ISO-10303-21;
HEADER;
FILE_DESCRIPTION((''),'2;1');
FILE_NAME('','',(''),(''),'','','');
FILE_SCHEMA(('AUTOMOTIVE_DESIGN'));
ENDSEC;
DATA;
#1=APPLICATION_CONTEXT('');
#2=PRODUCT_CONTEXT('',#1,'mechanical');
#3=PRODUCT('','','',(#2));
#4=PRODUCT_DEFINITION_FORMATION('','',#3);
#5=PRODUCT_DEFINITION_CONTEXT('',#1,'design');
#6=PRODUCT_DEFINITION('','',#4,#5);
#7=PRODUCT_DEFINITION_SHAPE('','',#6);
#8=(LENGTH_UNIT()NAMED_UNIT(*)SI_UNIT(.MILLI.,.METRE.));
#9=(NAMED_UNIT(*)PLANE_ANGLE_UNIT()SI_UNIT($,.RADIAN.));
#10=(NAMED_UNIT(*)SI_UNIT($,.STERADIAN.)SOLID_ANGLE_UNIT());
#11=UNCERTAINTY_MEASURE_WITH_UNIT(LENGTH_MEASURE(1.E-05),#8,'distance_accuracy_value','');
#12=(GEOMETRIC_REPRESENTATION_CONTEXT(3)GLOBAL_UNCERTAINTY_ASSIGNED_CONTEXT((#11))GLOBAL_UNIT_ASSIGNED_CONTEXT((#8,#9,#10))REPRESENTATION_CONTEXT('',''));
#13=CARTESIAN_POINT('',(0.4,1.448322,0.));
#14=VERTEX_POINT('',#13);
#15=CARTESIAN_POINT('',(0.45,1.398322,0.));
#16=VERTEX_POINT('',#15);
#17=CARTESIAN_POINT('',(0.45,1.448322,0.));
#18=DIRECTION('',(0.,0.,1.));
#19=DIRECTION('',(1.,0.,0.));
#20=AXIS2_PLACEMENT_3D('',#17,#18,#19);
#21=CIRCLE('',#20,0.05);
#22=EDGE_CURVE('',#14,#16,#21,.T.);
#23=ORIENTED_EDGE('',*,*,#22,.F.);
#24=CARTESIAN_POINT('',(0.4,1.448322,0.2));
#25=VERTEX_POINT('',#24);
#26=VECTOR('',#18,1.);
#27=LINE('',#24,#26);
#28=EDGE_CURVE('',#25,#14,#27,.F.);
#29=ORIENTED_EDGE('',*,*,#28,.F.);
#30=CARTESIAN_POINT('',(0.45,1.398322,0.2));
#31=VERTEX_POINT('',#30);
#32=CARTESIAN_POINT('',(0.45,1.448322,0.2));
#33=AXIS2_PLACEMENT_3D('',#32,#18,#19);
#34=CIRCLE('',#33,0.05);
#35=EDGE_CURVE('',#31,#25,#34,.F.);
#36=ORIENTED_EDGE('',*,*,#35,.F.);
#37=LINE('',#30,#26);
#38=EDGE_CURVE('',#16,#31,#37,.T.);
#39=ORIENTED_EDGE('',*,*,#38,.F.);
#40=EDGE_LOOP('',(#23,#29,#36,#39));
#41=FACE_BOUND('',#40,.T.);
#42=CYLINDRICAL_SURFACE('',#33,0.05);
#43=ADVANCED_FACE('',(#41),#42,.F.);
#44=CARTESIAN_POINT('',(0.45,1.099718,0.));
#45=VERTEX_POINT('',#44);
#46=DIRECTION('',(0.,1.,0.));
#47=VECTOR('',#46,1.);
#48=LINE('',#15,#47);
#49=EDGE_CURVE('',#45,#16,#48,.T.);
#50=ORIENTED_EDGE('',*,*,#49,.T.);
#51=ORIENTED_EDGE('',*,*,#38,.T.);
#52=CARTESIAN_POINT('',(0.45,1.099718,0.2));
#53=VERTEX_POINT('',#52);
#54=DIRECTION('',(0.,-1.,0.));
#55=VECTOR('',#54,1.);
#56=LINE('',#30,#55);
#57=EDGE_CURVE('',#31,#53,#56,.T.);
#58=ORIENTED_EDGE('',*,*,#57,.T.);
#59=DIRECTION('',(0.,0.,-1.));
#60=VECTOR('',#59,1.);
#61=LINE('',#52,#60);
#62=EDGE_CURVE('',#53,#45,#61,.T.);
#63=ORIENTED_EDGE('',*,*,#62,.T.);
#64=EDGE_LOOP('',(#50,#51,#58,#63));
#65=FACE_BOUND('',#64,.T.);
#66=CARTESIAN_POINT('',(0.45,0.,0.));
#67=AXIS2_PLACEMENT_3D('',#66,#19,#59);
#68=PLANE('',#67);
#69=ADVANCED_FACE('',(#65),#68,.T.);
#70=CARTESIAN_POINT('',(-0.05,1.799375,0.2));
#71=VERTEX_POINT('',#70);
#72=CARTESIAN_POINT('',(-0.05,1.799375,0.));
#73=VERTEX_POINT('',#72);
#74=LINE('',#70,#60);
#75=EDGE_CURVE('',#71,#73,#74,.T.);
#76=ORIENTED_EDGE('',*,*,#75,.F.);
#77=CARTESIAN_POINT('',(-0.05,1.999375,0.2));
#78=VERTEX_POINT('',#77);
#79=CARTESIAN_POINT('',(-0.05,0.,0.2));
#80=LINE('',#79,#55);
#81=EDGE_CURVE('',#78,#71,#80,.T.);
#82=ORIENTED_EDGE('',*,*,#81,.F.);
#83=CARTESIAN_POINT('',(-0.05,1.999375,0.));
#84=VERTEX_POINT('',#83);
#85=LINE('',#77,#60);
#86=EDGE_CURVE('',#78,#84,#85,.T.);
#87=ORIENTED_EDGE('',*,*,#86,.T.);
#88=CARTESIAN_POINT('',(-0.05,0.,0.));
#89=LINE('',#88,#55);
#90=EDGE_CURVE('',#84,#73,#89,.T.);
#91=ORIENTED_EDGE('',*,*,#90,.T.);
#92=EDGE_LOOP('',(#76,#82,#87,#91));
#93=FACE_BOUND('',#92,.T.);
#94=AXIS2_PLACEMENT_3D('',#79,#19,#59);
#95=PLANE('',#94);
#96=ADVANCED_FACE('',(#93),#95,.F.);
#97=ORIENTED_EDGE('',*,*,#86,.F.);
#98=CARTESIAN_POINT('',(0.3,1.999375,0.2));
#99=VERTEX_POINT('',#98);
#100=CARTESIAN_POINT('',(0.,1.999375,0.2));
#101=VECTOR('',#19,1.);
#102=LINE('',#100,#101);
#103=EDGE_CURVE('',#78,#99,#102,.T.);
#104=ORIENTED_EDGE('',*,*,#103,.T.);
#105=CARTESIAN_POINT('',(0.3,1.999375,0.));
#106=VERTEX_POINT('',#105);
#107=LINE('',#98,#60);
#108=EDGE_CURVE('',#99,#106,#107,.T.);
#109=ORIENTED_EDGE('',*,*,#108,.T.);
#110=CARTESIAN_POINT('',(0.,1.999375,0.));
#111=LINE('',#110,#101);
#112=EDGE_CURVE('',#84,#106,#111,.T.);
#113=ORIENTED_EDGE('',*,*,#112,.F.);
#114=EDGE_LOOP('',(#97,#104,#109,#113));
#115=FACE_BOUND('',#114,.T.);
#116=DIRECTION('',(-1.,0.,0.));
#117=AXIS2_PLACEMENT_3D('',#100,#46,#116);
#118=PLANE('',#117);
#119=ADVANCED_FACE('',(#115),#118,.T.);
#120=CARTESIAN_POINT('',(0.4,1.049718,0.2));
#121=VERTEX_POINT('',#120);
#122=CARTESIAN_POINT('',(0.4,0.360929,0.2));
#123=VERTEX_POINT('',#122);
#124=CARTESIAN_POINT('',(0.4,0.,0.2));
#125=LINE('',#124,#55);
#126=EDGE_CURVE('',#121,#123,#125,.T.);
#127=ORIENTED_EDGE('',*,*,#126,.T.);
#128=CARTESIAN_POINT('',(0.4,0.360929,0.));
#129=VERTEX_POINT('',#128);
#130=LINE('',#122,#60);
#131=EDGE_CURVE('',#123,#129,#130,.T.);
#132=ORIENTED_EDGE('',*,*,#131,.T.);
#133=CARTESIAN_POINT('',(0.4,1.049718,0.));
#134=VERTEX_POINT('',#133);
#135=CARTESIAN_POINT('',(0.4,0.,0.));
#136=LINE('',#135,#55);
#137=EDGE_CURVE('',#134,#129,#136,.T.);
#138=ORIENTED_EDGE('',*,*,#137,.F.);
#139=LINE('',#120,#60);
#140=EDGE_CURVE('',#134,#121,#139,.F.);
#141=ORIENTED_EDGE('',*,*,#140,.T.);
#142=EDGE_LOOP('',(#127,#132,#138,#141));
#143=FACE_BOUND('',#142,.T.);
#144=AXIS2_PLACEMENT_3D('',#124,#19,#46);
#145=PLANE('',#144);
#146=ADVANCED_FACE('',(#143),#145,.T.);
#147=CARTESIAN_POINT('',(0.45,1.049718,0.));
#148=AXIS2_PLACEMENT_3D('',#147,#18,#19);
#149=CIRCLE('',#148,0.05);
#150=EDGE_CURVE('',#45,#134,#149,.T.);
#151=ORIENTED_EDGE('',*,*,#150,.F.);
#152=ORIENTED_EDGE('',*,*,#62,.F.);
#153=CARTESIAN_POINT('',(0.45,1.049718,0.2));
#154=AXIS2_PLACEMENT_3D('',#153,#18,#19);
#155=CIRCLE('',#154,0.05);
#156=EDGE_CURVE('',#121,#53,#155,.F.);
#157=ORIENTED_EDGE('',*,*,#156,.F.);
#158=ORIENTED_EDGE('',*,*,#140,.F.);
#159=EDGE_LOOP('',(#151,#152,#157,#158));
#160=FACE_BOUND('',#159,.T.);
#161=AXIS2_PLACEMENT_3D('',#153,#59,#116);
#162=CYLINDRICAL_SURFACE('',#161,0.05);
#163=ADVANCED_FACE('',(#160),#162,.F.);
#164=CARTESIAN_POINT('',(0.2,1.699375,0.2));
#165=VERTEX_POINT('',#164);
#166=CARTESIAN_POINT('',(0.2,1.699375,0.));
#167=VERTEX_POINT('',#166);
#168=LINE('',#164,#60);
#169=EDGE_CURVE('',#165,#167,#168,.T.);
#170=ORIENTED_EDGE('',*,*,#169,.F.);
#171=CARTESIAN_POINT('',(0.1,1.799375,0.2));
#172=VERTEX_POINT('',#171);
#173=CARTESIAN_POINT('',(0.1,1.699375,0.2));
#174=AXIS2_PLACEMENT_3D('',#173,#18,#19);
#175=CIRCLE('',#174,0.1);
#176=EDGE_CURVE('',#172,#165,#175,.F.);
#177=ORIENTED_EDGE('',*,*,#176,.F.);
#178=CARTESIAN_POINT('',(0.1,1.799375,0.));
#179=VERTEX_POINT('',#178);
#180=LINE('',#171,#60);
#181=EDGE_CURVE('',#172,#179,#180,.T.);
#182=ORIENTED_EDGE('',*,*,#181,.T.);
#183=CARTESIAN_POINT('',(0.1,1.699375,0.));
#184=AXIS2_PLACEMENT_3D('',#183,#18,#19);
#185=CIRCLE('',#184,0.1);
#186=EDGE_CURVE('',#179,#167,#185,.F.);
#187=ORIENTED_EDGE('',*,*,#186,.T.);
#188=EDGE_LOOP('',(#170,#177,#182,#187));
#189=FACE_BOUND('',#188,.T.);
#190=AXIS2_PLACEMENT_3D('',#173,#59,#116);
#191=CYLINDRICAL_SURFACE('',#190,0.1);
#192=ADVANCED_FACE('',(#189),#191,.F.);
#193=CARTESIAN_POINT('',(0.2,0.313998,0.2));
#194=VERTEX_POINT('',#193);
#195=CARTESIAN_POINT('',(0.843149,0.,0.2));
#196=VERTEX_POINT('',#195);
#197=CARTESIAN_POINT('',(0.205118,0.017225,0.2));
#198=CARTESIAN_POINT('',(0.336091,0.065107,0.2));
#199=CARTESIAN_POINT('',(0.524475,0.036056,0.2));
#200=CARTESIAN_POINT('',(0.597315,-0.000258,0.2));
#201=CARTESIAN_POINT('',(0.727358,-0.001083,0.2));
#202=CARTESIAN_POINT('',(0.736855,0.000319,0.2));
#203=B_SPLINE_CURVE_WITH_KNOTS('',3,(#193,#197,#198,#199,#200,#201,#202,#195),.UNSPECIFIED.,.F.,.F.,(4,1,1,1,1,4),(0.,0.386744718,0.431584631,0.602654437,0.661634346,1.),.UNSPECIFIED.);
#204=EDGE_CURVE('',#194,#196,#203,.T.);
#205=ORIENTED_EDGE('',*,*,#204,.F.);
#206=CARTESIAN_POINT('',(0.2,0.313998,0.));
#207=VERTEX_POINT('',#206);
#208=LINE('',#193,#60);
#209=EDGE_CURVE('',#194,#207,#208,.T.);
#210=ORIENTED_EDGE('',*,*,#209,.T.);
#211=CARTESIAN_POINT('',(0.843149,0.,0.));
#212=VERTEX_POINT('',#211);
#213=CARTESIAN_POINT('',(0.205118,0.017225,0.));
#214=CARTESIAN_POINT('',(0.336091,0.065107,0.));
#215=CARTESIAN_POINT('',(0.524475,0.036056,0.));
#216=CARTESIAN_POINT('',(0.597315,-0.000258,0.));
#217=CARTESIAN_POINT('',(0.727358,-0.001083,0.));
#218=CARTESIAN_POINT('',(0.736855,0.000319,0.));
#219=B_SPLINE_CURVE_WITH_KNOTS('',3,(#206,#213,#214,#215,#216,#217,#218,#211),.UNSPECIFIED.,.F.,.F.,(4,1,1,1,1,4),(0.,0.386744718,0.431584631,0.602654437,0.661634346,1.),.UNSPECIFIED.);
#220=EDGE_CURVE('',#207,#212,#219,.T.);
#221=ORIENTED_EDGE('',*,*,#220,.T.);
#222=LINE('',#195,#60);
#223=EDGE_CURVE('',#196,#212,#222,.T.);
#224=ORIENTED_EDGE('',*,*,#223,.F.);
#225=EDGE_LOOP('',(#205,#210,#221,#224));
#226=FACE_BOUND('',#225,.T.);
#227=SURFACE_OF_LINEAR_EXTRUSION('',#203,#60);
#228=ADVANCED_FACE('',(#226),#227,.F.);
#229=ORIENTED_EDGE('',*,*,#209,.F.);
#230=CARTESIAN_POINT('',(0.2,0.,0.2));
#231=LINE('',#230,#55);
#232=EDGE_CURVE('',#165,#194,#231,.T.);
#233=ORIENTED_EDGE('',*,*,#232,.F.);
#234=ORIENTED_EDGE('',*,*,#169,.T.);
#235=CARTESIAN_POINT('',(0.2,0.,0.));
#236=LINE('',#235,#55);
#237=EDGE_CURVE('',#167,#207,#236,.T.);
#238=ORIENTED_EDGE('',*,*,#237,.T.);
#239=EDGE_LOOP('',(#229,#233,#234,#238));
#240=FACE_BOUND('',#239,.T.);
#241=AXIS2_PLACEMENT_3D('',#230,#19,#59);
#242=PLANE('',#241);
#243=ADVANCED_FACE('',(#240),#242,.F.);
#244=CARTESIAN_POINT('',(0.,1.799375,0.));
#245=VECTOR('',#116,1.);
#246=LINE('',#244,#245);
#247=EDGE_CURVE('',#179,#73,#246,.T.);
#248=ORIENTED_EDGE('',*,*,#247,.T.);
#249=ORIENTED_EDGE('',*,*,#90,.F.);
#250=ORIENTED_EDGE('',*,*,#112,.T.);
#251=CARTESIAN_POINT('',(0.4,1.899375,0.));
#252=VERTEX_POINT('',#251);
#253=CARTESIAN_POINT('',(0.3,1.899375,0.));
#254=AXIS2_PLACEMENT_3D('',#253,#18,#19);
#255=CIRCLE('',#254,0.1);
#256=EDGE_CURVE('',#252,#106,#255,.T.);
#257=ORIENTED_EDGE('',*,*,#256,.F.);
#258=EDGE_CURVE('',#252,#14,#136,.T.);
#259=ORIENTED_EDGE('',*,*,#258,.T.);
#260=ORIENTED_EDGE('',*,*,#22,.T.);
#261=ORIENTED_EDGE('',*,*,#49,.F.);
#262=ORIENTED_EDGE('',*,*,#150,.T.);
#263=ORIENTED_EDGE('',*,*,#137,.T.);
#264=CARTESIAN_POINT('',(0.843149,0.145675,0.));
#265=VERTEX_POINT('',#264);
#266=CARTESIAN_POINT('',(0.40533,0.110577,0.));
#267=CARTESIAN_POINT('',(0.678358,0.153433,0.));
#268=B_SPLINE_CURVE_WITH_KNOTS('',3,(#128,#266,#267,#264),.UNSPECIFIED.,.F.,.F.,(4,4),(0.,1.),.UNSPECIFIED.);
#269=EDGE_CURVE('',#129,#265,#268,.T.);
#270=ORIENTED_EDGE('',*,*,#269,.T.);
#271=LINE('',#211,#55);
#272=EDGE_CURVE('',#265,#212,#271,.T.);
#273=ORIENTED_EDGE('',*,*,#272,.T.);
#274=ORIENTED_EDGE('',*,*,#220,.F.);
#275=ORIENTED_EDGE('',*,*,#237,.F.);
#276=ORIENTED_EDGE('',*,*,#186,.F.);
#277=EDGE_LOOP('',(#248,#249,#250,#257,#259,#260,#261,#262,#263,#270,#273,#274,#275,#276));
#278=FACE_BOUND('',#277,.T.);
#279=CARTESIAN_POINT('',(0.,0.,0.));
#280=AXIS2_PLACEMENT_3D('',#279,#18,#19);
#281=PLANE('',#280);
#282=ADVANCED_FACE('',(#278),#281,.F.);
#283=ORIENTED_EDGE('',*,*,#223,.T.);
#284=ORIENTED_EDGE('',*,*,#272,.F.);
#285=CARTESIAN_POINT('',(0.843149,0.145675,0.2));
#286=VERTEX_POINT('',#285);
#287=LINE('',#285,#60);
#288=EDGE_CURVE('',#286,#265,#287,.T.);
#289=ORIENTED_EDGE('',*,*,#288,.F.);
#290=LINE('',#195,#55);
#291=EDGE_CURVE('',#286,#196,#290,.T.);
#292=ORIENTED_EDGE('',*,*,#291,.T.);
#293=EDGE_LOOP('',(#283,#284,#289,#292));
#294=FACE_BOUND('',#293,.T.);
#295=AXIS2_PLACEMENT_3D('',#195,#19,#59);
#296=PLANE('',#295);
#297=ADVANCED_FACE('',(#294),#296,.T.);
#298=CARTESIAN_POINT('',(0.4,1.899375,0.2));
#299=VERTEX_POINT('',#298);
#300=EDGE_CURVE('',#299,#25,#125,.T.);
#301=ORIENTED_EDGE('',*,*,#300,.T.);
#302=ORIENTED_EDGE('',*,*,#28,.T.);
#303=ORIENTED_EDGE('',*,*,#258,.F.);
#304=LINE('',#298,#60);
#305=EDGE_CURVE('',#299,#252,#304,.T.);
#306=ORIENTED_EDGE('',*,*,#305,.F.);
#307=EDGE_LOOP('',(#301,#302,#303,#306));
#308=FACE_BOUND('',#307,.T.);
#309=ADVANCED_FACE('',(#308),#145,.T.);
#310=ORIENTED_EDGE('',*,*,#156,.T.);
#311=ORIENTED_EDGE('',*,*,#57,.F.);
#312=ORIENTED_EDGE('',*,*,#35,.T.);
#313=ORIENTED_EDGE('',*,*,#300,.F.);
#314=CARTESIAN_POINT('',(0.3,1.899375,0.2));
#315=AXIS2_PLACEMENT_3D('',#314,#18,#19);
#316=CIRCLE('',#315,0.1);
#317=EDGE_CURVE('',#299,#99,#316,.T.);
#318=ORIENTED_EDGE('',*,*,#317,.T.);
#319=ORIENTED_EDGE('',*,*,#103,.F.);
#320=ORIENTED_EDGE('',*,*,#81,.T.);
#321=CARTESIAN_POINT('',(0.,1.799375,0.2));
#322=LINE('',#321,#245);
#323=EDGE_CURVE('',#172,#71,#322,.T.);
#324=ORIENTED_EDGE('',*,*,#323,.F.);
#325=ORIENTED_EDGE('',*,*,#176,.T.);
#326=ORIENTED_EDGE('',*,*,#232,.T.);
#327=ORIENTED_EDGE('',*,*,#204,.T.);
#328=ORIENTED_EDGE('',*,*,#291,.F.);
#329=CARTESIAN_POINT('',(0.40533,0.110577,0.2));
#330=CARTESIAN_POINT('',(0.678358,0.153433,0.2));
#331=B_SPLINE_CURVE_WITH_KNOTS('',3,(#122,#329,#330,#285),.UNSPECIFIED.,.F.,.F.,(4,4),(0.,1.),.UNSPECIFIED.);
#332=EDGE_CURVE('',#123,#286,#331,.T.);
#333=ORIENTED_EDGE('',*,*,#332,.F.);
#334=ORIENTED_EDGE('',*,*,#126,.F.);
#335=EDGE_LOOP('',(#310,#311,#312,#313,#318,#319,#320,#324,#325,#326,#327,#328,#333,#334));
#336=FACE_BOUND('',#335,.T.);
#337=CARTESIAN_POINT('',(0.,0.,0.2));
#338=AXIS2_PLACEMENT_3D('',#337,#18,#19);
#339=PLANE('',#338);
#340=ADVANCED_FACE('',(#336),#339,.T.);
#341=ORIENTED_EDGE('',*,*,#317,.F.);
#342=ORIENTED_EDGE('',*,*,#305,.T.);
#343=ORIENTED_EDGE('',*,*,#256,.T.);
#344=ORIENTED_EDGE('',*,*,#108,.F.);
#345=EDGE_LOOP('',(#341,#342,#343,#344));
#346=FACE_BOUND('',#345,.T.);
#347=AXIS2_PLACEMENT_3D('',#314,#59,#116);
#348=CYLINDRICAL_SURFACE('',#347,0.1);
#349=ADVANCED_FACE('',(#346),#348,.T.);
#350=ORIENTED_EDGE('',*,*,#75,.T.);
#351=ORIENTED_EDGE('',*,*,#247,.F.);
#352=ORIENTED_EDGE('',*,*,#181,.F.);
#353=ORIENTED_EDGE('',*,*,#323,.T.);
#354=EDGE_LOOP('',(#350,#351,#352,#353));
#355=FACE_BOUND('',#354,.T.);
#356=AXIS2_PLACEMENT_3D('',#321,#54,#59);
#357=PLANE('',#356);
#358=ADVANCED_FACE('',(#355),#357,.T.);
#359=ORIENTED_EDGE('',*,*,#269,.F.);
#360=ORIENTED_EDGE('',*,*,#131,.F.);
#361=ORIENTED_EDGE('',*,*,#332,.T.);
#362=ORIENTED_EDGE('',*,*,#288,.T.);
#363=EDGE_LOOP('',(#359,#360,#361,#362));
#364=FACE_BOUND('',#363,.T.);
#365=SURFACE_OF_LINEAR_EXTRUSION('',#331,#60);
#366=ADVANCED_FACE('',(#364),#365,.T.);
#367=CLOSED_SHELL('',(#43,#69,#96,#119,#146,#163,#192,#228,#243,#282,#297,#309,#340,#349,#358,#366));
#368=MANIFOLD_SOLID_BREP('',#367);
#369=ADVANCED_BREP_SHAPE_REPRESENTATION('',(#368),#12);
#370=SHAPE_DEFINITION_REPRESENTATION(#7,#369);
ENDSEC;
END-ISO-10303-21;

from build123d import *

# Parameters (mm, degrees)
BOSS_EXTRUDE1_DEPTH = 0.2
SKETCH2_W           = 0.2
SKETCH2_H           = 0.298604146
BOSS_EXTRUDE2_DEPTH = 0.05
FILLET1_R           = 0.05


with BuildPart() as part:
    # Sketch1 → Boss-Extrude1 (new body)
    with BuildSketch(Plane.XY):
        with BuildLine():
            Line((0.2, 0.699374902), (0.2, 0.3139984))
            add(Edge.make_bspline(
                [(0.2, 0.3139984), (0.205117782, 0.01722479), (0.336091093, 0.065107428), (0.524474595, 0.036055776), (0.597315342, -0.000257939), (0.727358441, -0.001083087), (0.736855282, 0.000318751), (0.843149125, 0)],
                knots=[0, 0, 0, 0, 0.386744718, 0.431584631, 0.602654437, 0.661634346, 1, 1, 1, 1], degree=3))
            Line((0.843149125, 0), (0.843149125, 0.145674502))
            add(Edge.make_bspline(
                [(0.4, 0.3609291), (0.405330144, 0.110576826), (0.678357666, 0.153432989), (0.843149125, 0.145674502)],
                knots=[0, 0, 0, 0, 1, 1, 1, 1], degree=3))
            Line((0.4, 0.3609291), (0.4, 0.948501248))
            Line((0.4, 0.948501248), (0.4, 1.899374902))
            ThreePointArc((0.4, 1.899374902), (0.370710678, 1.97008558), (0.3, 1.999374902))
            Line((0.3, 1.999374902), (-0.05, 1.999374902))
            Line((-0.05, 1.999374902), (-0.05, 1.799374902))
            Line((-0.05, 1.799374902), (0.1, 1.799374902))
            ThreePointArc((0.1, 1.799374902), (0.170710678, 1.77008558), (0.2, 1.699374902))
            Line((0.2, 1.699374902), (0.2, 0.699374902))
        make_face()
    extrude(amount=BOSS_EXTRUDE1_DEPTH)

    # Sketch2 → Boss-Extrude2 (add)
    with BuildSketch(Plane(origin=(0.4, 0, 0), x_dir=(0, 0, -1), z_dir=(1, 0, 0))):
        with Locations((-0.1, 1.249020091)):
            Rectangle(SKETCH2_W, SKETCH2_H)
    extrude(amount=BOSS_EXTRUDE2_DEPTH)

    # Fillet1
    fillet1_edges = [part.edges().sort_by_distance(p)[0] for p in [
        (0.4, 1.099718018, 0.1),
        (0.4, 1.398322164, 0.1),
    ]]
    fillet(fillet1_edges, radius=FILLET1_R - 0.0001)  # a hair under: the kernel refuses the full size


solid = part.part
